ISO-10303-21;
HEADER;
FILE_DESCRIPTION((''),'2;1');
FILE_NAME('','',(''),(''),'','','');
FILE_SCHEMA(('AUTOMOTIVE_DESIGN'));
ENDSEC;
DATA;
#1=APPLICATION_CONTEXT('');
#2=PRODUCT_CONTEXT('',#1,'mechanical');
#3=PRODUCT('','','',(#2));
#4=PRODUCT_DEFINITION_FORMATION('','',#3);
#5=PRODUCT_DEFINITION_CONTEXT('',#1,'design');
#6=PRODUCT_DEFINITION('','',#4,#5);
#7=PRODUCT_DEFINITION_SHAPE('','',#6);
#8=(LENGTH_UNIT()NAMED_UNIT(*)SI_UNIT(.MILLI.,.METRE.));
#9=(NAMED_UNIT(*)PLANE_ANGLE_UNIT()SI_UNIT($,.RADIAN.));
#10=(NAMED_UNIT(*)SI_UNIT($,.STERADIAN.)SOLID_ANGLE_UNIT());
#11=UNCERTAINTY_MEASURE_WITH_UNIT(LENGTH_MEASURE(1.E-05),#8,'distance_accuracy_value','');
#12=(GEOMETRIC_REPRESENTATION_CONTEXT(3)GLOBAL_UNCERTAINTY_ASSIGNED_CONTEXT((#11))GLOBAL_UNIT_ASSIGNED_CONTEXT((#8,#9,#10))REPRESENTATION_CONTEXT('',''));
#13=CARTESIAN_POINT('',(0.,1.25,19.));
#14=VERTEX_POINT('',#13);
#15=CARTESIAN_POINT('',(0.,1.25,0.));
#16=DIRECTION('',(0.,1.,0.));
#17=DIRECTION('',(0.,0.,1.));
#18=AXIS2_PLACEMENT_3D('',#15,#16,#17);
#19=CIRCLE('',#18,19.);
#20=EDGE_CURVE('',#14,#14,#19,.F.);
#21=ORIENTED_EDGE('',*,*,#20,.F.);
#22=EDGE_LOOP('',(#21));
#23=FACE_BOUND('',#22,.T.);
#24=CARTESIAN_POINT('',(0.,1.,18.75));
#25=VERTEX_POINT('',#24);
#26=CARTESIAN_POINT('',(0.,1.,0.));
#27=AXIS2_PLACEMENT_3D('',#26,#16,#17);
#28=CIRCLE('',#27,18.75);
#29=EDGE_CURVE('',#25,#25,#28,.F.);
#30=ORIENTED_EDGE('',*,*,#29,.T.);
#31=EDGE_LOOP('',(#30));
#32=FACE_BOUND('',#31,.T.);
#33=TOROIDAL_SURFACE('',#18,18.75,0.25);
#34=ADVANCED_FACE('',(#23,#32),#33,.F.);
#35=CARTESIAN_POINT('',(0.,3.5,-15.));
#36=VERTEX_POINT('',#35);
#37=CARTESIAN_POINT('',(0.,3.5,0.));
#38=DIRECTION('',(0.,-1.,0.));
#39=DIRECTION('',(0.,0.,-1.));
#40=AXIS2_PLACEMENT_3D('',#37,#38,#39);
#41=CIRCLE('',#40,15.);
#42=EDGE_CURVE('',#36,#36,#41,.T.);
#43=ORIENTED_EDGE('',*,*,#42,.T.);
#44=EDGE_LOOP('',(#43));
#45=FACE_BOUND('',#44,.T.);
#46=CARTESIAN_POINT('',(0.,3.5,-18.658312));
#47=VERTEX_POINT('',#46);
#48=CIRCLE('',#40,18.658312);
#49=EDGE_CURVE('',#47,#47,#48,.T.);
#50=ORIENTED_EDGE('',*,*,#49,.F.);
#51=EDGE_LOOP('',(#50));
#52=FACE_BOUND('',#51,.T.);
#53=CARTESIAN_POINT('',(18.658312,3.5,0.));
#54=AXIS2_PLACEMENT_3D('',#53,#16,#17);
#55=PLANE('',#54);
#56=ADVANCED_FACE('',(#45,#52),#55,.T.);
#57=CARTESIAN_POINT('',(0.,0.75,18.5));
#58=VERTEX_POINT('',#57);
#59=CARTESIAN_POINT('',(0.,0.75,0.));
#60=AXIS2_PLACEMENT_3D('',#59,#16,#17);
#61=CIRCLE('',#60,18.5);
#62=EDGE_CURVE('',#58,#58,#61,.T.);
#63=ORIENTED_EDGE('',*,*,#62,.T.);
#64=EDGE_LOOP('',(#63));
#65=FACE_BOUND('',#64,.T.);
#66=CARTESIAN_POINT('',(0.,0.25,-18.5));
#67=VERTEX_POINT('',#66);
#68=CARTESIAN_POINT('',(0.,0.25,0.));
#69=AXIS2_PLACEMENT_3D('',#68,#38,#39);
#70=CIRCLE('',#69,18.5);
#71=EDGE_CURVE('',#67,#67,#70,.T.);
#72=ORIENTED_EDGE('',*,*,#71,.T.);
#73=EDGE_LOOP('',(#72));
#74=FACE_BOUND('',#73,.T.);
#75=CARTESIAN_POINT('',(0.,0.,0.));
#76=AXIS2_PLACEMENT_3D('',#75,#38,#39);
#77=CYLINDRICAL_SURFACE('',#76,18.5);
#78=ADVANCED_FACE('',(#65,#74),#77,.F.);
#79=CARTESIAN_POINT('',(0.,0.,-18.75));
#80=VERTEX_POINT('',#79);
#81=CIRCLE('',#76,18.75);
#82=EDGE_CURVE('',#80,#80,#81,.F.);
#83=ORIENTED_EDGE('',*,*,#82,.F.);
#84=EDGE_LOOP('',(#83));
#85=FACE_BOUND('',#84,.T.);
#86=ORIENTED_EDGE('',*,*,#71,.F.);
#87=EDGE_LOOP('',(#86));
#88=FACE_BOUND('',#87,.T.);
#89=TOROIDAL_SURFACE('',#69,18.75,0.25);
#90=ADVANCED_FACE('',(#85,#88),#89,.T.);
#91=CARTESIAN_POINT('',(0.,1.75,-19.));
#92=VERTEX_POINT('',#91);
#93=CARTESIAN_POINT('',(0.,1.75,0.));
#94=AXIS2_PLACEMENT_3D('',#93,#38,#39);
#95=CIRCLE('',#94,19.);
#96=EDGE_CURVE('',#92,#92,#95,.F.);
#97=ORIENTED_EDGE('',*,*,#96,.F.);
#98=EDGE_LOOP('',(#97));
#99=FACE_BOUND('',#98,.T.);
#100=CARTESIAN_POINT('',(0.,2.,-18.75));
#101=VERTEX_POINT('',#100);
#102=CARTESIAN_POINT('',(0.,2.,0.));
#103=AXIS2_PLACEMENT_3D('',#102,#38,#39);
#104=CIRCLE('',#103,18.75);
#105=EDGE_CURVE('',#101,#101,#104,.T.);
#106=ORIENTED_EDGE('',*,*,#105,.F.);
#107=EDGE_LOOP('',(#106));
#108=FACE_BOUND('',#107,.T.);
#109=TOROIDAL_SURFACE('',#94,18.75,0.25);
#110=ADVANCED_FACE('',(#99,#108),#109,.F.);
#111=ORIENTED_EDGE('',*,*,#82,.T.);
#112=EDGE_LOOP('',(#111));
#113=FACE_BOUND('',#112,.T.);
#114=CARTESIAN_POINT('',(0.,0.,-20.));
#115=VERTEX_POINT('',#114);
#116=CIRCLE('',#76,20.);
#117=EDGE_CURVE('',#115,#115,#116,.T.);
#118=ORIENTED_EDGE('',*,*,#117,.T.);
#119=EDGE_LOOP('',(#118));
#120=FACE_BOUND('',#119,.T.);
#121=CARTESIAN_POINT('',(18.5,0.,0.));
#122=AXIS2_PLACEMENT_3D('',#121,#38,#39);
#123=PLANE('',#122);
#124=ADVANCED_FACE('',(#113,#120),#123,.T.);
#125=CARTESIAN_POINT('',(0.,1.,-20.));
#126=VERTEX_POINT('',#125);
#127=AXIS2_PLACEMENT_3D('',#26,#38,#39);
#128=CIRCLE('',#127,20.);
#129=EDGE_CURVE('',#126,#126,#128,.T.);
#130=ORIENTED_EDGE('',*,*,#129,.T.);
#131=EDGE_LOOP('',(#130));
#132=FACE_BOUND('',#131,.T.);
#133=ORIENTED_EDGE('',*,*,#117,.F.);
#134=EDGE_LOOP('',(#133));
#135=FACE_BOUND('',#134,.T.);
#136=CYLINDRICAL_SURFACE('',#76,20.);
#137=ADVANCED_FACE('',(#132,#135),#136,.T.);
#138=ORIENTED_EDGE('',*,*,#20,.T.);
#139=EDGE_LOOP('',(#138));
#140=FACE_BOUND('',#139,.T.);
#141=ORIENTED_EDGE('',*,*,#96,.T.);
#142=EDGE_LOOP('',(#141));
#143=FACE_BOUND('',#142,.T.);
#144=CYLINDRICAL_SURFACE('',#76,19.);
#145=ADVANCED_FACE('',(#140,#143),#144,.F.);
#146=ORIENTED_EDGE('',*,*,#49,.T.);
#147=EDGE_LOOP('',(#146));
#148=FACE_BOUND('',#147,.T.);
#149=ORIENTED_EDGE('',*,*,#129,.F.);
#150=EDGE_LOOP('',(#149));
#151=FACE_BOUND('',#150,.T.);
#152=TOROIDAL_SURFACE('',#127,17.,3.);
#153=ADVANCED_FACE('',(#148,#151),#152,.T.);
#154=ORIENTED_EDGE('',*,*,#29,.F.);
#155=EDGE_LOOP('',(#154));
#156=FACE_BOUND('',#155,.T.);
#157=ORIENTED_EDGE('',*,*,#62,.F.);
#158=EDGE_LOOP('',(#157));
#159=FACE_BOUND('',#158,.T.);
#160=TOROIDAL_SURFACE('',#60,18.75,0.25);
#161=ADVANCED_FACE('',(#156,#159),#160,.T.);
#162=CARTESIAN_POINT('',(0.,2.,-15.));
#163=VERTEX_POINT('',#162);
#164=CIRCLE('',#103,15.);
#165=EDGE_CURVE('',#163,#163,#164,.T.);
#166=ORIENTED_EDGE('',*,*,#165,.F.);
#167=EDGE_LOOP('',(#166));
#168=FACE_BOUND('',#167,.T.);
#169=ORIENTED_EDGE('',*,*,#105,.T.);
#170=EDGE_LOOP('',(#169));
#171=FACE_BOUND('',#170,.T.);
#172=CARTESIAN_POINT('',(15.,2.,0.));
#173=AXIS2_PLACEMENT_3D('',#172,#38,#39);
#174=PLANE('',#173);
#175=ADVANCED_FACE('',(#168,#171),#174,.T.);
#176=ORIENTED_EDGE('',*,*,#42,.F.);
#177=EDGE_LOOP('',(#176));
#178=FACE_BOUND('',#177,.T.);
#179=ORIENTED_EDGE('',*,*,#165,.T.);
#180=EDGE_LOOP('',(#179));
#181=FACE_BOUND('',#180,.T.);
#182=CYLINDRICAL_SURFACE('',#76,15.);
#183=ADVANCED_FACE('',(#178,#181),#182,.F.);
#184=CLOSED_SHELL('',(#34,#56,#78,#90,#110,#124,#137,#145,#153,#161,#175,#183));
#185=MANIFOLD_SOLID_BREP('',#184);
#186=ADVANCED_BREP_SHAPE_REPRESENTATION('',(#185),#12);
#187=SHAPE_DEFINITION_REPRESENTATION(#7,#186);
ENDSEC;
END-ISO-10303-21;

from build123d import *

# Parameters (mm, degrees)
REDONDEO1_R = 0.25


with BuildPart() as part:
    # Croquis1 → Revolución1 (revolve)
    with BuildSketch(Plane.XY, mode=Mode.PRIVATE) as revoluci_n1_sk:
        with BuildLine():
            Line((20, 0), (20, 1))
            ThreePointArc((20, 1), (19.643382037, 2.418637165), (18.658312395, 3.5))
            Line((18.658312395, 3.5), (15, 3.5))
            Line((15, 3.5), (15, 2))
            Line((15, 2), (19, 2))
            Line((19, 2), (19, 1))
            Line((19, 1), (18.5, 1))
            Line((18.5, 1), (18.5, 0))
            Line((18.5, 0), (20, 0))
        make_face()
    revolve(revoluci_n1_sk.sketch.rotate(Axis((0, 0, 0), (0, 1, 0)), 90), axis=Axis((0, 0, 0), (0, 1, 0)))

    # Redondeo1
    redondeo1_edges = [part.edges().sort_by_distance(p)[0] for p in [
        (0, 0, 18.5),
        (0, 1, 18.5),
        (0, 1, 19),
        (0, 2, 19),
    ]]
    fillet(redondeo1_edges, radius=REDONDEO1_R - 0.0001)  # a hair under: the kernel refuses the full size


solid = part.part
